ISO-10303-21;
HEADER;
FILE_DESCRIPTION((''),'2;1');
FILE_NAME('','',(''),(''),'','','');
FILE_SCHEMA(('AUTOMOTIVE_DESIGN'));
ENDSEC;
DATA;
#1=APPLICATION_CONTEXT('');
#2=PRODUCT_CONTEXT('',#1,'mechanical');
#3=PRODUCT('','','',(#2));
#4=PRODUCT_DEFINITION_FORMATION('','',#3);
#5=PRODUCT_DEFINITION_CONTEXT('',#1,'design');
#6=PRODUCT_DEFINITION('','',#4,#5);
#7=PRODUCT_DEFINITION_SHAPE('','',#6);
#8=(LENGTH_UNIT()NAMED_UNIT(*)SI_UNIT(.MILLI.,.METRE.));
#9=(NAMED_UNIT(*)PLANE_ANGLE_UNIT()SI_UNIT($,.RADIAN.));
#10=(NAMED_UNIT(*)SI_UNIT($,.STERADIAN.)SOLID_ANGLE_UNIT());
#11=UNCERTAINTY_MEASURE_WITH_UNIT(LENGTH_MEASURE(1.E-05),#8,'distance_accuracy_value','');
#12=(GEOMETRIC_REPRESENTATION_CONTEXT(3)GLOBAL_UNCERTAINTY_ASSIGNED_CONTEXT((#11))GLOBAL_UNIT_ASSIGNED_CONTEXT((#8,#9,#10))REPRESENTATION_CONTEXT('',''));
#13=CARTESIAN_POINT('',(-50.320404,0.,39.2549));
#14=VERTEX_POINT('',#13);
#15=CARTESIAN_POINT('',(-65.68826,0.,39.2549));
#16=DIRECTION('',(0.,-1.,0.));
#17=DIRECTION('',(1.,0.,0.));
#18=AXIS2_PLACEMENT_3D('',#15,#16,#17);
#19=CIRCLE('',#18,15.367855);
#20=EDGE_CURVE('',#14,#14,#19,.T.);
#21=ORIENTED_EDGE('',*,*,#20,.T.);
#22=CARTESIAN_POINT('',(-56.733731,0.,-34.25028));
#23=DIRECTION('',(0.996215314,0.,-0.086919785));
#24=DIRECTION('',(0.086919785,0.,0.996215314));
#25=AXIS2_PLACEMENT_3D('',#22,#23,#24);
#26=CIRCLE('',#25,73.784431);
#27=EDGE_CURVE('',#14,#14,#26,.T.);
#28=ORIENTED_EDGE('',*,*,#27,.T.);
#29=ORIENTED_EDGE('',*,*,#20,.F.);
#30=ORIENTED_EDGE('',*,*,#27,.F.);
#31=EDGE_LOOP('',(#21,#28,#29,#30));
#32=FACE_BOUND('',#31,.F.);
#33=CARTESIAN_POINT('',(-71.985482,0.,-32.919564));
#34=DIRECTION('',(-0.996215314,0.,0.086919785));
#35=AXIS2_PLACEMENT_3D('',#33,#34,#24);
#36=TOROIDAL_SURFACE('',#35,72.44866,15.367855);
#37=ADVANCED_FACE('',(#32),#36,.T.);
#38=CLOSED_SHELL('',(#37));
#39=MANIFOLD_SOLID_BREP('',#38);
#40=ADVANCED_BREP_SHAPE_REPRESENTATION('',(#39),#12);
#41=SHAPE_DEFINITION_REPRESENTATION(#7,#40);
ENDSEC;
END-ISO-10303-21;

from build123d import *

# Parameters (mm, degrees)
F2_R = 15.3678554399


# Not quite as in the source:
# - the program builds the solid bodies; features that only make, move or delete a surface that nothing else refers to are left out


with BuildPart() as f3:
    # F2 (on Front) → F3 (revolve)
    with BuildSketch(Plane.XZ):
        with Locations((-65.6882598996, 39.254900068)):
            Circle(F2_R)
    revolve(axis=Axis((-7.423649542, 0, -38.5525841266), (0.9962153136, 0, -0.0869197845)))


solid = f3.part
